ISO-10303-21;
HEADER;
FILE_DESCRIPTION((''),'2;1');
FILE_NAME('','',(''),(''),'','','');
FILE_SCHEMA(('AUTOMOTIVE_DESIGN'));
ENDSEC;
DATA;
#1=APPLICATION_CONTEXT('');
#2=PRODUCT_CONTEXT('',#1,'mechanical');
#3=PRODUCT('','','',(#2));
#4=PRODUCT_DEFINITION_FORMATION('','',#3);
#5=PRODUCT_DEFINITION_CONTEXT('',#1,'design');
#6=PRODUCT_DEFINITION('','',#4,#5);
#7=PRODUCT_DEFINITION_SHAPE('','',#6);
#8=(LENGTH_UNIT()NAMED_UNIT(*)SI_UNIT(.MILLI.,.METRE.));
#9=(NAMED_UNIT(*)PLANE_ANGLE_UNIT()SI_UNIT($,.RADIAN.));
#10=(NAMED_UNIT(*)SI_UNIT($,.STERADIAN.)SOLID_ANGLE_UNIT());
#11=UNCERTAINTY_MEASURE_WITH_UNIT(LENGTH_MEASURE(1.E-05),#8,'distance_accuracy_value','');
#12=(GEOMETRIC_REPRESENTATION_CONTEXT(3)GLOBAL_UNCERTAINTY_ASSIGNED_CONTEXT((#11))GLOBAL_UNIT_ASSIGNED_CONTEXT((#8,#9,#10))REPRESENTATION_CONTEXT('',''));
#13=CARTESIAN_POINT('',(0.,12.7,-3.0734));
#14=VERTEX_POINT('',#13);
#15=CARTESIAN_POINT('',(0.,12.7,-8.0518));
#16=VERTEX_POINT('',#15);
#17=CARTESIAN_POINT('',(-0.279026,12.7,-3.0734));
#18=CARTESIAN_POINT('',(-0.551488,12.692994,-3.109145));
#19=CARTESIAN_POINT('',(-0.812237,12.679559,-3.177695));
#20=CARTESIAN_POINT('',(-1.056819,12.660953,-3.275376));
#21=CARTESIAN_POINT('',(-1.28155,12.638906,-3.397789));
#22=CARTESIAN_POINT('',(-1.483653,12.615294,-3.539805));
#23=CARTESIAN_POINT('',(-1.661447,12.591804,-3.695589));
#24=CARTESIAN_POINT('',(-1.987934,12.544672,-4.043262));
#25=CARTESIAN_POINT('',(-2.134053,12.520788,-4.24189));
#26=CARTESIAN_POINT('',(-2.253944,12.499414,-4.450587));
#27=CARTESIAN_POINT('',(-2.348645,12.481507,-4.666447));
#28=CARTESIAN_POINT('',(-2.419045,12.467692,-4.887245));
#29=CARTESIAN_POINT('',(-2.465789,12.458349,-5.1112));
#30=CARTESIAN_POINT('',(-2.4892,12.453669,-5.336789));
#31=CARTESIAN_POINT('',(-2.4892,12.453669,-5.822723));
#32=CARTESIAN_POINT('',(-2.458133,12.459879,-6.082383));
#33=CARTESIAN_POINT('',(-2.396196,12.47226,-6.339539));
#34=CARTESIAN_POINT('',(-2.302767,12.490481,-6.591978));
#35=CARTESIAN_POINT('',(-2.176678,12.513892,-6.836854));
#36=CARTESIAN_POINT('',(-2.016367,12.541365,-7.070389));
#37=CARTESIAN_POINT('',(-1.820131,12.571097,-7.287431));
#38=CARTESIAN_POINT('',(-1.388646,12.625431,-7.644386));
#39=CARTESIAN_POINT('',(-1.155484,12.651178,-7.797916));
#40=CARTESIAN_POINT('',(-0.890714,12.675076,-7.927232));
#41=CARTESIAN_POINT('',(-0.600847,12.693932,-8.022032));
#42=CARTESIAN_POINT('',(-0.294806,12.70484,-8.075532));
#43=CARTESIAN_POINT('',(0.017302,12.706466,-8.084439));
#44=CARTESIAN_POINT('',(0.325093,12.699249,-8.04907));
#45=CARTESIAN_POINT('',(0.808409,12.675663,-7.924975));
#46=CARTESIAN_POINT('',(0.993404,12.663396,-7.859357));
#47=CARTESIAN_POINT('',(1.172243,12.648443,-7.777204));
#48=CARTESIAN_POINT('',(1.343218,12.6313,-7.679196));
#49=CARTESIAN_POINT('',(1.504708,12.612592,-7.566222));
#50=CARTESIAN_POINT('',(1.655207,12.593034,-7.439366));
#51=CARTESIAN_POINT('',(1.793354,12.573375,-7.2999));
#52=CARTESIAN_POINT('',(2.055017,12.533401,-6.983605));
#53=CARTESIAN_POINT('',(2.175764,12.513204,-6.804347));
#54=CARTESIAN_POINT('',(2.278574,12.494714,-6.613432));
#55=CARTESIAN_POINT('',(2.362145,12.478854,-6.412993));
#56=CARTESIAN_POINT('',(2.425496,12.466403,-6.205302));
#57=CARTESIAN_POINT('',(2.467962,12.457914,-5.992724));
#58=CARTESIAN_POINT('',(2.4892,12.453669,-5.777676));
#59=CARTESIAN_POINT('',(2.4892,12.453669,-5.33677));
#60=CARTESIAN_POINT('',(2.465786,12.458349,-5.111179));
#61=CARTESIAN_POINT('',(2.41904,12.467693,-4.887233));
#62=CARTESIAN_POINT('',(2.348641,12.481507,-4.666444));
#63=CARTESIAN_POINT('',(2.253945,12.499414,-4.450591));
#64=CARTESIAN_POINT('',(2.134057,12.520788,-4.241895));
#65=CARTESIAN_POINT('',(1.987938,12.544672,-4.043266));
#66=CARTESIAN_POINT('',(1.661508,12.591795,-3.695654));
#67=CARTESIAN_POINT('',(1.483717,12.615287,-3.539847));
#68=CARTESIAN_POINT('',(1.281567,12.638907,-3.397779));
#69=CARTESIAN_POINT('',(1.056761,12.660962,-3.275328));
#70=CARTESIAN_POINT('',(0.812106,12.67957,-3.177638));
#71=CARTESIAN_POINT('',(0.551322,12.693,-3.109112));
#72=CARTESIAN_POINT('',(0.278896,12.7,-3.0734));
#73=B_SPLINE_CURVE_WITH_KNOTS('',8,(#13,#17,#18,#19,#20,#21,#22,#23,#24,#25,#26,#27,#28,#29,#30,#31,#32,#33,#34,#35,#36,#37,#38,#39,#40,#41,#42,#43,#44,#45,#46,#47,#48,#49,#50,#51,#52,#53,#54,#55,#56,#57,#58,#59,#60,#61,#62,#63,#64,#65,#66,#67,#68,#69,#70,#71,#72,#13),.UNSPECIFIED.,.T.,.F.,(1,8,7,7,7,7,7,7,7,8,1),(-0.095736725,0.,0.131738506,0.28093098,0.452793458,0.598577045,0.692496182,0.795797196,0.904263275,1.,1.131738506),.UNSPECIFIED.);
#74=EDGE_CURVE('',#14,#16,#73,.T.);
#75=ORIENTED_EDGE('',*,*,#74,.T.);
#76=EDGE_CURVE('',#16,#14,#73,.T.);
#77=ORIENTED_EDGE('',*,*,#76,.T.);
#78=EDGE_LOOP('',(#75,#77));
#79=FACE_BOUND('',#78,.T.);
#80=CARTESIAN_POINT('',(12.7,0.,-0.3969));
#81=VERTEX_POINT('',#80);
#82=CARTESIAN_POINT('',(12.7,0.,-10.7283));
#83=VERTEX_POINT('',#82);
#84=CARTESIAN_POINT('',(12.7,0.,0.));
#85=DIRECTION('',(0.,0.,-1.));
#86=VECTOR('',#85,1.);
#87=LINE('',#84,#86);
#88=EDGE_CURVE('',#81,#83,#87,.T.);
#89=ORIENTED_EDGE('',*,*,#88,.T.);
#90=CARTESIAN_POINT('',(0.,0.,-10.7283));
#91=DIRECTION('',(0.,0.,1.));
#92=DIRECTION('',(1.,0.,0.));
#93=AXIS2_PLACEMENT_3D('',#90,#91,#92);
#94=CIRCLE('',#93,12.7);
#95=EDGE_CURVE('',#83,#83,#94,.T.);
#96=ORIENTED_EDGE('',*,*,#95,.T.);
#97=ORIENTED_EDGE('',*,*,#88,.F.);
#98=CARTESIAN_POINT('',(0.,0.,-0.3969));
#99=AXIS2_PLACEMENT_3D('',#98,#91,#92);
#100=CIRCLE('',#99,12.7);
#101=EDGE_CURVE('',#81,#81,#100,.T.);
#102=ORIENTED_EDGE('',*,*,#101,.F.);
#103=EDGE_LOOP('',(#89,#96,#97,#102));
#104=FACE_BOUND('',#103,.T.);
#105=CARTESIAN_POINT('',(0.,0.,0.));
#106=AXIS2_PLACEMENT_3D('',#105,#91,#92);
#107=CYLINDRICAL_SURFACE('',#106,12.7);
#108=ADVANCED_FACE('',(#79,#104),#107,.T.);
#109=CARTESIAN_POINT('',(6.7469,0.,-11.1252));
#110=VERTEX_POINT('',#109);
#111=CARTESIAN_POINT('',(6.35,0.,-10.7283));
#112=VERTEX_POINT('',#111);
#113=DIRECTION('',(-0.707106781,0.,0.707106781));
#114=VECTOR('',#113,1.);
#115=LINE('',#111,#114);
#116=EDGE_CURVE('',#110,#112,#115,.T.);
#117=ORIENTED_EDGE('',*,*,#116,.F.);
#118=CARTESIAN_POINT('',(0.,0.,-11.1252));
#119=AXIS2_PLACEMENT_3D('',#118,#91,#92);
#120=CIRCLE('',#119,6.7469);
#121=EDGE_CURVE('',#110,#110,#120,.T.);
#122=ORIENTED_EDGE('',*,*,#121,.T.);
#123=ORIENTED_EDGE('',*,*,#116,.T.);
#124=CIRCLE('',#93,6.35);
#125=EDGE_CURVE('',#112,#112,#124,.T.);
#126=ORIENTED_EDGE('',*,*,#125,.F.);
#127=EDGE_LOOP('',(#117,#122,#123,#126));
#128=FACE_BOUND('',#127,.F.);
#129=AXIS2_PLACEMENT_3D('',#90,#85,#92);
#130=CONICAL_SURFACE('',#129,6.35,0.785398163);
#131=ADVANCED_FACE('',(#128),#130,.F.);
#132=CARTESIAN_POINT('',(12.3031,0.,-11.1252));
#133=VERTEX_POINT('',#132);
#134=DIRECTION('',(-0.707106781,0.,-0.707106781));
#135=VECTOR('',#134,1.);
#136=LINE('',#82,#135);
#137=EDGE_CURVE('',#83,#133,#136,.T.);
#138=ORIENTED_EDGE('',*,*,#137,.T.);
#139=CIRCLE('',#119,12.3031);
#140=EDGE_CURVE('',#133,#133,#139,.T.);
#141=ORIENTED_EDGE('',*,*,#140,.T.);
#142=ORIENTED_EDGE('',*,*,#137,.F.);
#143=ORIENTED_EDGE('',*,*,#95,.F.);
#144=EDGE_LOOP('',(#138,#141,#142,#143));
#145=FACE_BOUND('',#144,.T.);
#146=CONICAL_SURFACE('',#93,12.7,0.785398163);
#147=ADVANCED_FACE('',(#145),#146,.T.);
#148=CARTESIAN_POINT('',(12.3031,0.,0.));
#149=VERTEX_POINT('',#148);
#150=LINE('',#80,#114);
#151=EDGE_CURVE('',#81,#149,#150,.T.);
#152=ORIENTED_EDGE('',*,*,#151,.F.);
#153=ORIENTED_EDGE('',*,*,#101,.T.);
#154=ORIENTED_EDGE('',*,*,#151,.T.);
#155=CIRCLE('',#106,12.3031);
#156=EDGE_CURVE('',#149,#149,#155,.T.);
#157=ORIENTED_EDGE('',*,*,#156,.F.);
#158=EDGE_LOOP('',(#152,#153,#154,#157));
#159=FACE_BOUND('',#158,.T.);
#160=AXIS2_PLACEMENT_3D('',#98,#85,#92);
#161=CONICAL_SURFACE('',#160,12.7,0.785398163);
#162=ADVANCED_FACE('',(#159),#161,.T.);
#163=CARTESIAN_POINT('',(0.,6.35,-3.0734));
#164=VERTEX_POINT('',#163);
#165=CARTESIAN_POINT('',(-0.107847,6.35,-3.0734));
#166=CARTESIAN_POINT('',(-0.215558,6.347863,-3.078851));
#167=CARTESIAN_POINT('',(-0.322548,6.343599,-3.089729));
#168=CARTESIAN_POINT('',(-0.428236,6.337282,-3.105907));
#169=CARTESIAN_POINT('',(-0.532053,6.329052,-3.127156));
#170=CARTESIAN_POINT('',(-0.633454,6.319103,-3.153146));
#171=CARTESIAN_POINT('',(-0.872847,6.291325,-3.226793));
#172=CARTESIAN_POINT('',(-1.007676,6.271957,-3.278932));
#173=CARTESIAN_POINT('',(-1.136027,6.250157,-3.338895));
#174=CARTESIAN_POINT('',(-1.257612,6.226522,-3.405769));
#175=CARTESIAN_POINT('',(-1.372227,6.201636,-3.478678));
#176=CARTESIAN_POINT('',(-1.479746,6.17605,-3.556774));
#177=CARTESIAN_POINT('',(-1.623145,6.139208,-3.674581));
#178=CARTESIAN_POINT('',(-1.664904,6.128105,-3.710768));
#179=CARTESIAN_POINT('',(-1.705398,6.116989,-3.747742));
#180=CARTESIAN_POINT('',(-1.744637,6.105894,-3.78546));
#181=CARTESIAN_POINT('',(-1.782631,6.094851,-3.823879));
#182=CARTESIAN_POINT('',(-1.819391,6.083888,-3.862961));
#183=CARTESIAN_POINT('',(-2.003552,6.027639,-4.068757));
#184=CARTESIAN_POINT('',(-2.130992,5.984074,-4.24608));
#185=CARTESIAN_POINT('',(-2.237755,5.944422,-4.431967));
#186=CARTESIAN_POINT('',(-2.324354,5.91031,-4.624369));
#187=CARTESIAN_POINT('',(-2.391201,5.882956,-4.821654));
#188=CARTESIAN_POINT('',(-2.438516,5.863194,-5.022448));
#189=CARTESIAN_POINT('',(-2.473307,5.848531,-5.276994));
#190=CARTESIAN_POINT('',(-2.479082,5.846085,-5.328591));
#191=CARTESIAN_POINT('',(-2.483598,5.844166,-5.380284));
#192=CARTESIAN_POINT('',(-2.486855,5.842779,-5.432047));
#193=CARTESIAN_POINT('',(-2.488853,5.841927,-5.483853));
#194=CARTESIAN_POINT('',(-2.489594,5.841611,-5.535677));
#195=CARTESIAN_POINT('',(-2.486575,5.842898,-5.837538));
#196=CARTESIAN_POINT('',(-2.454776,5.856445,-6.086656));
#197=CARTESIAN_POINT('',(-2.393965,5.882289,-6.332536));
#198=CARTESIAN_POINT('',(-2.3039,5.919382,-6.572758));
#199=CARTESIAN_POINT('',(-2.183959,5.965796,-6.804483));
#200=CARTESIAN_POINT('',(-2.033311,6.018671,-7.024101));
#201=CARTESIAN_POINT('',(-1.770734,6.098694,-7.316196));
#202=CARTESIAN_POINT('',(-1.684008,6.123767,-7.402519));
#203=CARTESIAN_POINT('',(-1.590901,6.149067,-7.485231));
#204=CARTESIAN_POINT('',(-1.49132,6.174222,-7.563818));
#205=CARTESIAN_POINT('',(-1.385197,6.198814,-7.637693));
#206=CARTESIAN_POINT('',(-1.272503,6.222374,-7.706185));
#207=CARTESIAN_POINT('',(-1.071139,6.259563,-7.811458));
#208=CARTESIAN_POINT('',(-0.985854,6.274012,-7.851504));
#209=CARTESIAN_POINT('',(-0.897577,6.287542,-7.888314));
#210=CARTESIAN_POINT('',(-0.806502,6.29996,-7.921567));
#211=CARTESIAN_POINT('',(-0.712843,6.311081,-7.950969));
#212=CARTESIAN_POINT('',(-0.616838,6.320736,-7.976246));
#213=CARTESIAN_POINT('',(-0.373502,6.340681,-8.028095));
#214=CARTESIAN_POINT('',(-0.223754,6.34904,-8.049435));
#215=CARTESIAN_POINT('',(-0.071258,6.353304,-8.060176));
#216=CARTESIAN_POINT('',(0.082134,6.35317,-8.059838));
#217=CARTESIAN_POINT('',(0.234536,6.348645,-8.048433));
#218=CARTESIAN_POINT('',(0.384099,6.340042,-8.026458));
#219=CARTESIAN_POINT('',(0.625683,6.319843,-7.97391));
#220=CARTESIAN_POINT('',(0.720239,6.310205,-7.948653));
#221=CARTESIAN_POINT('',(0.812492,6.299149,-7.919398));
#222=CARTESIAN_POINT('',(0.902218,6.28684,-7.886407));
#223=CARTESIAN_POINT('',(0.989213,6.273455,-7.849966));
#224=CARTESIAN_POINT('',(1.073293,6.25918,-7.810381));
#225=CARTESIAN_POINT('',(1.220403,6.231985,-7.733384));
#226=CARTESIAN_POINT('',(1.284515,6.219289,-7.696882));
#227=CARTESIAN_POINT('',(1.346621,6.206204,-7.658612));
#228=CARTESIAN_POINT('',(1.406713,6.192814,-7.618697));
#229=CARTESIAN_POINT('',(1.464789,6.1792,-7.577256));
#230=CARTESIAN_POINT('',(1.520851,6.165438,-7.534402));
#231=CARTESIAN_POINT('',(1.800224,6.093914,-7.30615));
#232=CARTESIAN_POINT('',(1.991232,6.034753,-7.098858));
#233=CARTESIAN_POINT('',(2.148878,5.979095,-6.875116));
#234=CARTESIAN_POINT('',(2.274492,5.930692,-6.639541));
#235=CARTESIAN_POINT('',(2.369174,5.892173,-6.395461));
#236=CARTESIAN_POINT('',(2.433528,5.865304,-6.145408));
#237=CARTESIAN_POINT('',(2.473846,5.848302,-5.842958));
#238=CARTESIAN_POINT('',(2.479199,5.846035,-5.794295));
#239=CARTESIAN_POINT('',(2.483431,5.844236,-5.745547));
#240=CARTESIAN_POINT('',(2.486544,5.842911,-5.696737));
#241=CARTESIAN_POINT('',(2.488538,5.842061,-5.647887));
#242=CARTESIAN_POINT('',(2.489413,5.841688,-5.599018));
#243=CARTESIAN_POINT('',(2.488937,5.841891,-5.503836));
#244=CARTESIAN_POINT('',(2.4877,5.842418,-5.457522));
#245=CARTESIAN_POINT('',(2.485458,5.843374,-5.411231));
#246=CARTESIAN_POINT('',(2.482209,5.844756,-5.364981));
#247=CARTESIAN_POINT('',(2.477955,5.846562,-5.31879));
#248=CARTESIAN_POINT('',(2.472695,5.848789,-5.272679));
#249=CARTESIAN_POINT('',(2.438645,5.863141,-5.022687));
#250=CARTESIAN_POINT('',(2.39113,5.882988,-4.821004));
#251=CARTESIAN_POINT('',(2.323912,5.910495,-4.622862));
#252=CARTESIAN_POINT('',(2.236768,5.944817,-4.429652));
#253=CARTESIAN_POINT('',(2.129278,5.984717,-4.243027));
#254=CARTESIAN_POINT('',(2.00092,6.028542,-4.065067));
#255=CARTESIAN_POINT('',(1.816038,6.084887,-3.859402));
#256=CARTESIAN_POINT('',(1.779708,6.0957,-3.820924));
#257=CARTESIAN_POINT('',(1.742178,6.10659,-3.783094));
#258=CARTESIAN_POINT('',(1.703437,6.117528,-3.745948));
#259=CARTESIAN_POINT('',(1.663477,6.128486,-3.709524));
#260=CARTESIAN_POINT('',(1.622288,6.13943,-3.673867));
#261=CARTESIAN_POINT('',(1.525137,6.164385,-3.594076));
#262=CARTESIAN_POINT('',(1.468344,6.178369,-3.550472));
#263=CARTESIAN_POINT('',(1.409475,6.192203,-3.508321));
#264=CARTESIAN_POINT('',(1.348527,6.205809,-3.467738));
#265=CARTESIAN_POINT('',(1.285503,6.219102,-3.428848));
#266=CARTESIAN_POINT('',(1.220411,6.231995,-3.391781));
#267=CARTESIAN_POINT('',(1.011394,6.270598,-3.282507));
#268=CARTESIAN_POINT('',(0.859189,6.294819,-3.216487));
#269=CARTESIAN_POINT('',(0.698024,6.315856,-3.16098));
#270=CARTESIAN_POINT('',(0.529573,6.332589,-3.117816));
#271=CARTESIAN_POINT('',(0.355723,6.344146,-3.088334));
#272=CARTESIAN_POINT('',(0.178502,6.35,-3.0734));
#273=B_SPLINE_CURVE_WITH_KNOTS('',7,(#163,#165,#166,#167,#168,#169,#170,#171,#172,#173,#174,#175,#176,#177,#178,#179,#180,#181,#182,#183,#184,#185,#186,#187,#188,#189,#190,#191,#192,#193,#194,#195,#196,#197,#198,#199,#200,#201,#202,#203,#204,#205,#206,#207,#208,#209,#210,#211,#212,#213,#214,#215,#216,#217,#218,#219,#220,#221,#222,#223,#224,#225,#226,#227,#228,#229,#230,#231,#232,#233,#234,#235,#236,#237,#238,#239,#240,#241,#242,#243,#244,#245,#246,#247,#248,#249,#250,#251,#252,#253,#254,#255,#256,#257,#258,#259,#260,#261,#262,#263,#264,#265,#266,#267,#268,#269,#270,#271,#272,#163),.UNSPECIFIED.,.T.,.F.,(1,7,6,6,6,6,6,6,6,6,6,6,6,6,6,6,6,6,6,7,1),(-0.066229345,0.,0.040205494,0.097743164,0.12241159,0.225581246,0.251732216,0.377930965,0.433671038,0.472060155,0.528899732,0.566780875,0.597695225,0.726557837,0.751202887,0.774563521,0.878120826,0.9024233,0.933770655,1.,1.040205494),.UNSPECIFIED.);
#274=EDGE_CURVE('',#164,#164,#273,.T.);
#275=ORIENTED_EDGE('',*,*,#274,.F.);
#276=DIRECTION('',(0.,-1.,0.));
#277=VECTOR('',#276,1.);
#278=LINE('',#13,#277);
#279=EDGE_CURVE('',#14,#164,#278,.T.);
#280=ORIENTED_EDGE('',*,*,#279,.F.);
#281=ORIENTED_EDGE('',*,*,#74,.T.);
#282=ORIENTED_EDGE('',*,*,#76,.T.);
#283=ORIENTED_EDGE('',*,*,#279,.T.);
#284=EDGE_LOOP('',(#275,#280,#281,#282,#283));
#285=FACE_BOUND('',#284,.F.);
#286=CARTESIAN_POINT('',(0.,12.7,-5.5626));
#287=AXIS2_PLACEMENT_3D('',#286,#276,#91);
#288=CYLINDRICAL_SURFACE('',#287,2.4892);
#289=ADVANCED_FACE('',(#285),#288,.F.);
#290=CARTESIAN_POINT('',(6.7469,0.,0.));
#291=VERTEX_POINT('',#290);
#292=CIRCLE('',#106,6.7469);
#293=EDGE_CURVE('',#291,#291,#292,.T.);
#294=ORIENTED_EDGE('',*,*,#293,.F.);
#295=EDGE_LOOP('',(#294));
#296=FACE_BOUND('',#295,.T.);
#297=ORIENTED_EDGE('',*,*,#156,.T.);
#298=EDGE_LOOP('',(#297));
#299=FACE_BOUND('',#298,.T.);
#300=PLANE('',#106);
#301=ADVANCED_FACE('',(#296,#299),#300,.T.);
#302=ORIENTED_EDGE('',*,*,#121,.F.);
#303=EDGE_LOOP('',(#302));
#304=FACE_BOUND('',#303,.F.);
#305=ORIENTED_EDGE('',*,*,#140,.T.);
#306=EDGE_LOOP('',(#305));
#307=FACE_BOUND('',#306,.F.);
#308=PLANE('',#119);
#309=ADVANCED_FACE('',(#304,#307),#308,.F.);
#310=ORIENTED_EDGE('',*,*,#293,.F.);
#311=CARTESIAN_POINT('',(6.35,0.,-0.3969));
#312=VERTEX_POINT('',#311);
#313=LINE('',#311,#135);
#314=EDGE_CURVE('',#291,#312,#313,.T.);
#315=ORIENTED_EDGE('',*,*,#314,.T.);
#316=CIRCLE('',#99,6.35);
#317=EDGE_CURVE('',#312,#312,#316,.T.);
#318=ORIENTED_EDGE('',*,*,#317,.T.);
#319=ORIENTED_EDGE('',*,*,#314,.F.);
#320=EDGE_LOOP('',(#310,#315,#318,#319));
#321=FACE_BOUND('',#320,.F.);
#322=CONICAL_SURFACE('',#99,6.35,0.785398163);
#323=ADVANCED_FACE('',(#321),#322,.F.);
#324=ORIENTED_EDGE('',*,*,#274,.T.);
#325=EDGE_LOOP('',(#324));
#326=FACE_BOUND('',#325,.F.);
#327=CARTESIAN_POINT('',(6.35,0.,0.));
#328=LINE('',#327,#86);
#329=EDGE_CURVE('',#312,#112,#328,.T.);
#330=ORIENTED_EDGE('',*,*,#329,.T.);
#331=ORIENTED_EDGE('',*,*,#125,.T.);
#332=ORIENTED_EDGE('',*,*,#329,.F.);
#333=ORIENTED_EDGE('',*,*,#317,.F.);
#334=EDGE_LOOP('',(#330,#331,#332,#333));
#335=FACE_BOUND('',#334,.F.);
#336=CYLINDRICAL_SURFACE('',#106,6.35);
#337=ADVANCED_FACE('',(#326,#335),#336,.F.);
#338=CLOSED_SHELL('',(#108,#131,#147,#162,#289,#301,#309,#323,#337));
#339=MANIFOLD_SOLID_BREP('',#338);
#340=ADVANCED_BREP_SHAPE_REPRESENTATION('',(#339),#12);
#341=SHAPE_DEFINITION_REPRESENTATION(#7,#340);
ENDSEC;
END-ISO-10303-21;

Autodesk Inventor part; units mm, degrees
ref_plane "YZ Plane" through (0, 0, 0) normal (1, 0, 0) x (0, 1, 0)
ref_plane "XY Plane" through (0, 0, 0) normal (0, 0, 1) x (1, 0, 0)
sketch "Sketch1" plane through (0, 0, 0) normal (0, 0, 1) x (1, 0, 0)
  circle A0 centre (0, 0) radius 12.7
  dimension "d0" = 25.4
extrude "Extrusion1" add sketch "Sketch1" against normal blind 11.1252
sketch "Sketch2" plane through (0, 0, 0) normal (0, 0, 1) x (1, 0, 0)
  circle A0 centre (0, 0) radius 12.7 projected
  circle A1 centre (0, 0) radius 6.35
  dimension "d3" = 12.7
extrude "Extrusion2" cut sketch "Sketch2" against normal up to next contours A1
chamfer "Chamfer1" distance 0.3969 angle 45 4 edges at (-12.7, 0, 0) (-12.7, 0, -11.1252) (-6.35, 0, 0) (-6.35, 0, -11.1252)
ref_plane "Work Plane1" through (0, 12.7, 0) normal (0, 1, 0) x (-1, 0, 0)
sketch "Sketch3" plane through (0, 12.7, 0) normal (0, 1, 0) x (-1, 0, 0)
  line L0 (12.3031, -11.1252) -> (-12.3031, -11.1252) projected
  line L1 (12.7, -0.3969) -> (12.7, -10.7283) projected
  point P0 (0, 0)
  point P1 (0, -5.5626)
  point P2 (0, -11.1252)
  point P3 (12.7, -5.5626)
hole "Hole1" at (0, 12.7, -5.5626) direction (0, -1, 0) diameter 4.9784 end up to surface thread size "1/4-20 UNC" class "2B" standard "ANSI Unified Screw Threads"
properties part number "SC-8-F"
